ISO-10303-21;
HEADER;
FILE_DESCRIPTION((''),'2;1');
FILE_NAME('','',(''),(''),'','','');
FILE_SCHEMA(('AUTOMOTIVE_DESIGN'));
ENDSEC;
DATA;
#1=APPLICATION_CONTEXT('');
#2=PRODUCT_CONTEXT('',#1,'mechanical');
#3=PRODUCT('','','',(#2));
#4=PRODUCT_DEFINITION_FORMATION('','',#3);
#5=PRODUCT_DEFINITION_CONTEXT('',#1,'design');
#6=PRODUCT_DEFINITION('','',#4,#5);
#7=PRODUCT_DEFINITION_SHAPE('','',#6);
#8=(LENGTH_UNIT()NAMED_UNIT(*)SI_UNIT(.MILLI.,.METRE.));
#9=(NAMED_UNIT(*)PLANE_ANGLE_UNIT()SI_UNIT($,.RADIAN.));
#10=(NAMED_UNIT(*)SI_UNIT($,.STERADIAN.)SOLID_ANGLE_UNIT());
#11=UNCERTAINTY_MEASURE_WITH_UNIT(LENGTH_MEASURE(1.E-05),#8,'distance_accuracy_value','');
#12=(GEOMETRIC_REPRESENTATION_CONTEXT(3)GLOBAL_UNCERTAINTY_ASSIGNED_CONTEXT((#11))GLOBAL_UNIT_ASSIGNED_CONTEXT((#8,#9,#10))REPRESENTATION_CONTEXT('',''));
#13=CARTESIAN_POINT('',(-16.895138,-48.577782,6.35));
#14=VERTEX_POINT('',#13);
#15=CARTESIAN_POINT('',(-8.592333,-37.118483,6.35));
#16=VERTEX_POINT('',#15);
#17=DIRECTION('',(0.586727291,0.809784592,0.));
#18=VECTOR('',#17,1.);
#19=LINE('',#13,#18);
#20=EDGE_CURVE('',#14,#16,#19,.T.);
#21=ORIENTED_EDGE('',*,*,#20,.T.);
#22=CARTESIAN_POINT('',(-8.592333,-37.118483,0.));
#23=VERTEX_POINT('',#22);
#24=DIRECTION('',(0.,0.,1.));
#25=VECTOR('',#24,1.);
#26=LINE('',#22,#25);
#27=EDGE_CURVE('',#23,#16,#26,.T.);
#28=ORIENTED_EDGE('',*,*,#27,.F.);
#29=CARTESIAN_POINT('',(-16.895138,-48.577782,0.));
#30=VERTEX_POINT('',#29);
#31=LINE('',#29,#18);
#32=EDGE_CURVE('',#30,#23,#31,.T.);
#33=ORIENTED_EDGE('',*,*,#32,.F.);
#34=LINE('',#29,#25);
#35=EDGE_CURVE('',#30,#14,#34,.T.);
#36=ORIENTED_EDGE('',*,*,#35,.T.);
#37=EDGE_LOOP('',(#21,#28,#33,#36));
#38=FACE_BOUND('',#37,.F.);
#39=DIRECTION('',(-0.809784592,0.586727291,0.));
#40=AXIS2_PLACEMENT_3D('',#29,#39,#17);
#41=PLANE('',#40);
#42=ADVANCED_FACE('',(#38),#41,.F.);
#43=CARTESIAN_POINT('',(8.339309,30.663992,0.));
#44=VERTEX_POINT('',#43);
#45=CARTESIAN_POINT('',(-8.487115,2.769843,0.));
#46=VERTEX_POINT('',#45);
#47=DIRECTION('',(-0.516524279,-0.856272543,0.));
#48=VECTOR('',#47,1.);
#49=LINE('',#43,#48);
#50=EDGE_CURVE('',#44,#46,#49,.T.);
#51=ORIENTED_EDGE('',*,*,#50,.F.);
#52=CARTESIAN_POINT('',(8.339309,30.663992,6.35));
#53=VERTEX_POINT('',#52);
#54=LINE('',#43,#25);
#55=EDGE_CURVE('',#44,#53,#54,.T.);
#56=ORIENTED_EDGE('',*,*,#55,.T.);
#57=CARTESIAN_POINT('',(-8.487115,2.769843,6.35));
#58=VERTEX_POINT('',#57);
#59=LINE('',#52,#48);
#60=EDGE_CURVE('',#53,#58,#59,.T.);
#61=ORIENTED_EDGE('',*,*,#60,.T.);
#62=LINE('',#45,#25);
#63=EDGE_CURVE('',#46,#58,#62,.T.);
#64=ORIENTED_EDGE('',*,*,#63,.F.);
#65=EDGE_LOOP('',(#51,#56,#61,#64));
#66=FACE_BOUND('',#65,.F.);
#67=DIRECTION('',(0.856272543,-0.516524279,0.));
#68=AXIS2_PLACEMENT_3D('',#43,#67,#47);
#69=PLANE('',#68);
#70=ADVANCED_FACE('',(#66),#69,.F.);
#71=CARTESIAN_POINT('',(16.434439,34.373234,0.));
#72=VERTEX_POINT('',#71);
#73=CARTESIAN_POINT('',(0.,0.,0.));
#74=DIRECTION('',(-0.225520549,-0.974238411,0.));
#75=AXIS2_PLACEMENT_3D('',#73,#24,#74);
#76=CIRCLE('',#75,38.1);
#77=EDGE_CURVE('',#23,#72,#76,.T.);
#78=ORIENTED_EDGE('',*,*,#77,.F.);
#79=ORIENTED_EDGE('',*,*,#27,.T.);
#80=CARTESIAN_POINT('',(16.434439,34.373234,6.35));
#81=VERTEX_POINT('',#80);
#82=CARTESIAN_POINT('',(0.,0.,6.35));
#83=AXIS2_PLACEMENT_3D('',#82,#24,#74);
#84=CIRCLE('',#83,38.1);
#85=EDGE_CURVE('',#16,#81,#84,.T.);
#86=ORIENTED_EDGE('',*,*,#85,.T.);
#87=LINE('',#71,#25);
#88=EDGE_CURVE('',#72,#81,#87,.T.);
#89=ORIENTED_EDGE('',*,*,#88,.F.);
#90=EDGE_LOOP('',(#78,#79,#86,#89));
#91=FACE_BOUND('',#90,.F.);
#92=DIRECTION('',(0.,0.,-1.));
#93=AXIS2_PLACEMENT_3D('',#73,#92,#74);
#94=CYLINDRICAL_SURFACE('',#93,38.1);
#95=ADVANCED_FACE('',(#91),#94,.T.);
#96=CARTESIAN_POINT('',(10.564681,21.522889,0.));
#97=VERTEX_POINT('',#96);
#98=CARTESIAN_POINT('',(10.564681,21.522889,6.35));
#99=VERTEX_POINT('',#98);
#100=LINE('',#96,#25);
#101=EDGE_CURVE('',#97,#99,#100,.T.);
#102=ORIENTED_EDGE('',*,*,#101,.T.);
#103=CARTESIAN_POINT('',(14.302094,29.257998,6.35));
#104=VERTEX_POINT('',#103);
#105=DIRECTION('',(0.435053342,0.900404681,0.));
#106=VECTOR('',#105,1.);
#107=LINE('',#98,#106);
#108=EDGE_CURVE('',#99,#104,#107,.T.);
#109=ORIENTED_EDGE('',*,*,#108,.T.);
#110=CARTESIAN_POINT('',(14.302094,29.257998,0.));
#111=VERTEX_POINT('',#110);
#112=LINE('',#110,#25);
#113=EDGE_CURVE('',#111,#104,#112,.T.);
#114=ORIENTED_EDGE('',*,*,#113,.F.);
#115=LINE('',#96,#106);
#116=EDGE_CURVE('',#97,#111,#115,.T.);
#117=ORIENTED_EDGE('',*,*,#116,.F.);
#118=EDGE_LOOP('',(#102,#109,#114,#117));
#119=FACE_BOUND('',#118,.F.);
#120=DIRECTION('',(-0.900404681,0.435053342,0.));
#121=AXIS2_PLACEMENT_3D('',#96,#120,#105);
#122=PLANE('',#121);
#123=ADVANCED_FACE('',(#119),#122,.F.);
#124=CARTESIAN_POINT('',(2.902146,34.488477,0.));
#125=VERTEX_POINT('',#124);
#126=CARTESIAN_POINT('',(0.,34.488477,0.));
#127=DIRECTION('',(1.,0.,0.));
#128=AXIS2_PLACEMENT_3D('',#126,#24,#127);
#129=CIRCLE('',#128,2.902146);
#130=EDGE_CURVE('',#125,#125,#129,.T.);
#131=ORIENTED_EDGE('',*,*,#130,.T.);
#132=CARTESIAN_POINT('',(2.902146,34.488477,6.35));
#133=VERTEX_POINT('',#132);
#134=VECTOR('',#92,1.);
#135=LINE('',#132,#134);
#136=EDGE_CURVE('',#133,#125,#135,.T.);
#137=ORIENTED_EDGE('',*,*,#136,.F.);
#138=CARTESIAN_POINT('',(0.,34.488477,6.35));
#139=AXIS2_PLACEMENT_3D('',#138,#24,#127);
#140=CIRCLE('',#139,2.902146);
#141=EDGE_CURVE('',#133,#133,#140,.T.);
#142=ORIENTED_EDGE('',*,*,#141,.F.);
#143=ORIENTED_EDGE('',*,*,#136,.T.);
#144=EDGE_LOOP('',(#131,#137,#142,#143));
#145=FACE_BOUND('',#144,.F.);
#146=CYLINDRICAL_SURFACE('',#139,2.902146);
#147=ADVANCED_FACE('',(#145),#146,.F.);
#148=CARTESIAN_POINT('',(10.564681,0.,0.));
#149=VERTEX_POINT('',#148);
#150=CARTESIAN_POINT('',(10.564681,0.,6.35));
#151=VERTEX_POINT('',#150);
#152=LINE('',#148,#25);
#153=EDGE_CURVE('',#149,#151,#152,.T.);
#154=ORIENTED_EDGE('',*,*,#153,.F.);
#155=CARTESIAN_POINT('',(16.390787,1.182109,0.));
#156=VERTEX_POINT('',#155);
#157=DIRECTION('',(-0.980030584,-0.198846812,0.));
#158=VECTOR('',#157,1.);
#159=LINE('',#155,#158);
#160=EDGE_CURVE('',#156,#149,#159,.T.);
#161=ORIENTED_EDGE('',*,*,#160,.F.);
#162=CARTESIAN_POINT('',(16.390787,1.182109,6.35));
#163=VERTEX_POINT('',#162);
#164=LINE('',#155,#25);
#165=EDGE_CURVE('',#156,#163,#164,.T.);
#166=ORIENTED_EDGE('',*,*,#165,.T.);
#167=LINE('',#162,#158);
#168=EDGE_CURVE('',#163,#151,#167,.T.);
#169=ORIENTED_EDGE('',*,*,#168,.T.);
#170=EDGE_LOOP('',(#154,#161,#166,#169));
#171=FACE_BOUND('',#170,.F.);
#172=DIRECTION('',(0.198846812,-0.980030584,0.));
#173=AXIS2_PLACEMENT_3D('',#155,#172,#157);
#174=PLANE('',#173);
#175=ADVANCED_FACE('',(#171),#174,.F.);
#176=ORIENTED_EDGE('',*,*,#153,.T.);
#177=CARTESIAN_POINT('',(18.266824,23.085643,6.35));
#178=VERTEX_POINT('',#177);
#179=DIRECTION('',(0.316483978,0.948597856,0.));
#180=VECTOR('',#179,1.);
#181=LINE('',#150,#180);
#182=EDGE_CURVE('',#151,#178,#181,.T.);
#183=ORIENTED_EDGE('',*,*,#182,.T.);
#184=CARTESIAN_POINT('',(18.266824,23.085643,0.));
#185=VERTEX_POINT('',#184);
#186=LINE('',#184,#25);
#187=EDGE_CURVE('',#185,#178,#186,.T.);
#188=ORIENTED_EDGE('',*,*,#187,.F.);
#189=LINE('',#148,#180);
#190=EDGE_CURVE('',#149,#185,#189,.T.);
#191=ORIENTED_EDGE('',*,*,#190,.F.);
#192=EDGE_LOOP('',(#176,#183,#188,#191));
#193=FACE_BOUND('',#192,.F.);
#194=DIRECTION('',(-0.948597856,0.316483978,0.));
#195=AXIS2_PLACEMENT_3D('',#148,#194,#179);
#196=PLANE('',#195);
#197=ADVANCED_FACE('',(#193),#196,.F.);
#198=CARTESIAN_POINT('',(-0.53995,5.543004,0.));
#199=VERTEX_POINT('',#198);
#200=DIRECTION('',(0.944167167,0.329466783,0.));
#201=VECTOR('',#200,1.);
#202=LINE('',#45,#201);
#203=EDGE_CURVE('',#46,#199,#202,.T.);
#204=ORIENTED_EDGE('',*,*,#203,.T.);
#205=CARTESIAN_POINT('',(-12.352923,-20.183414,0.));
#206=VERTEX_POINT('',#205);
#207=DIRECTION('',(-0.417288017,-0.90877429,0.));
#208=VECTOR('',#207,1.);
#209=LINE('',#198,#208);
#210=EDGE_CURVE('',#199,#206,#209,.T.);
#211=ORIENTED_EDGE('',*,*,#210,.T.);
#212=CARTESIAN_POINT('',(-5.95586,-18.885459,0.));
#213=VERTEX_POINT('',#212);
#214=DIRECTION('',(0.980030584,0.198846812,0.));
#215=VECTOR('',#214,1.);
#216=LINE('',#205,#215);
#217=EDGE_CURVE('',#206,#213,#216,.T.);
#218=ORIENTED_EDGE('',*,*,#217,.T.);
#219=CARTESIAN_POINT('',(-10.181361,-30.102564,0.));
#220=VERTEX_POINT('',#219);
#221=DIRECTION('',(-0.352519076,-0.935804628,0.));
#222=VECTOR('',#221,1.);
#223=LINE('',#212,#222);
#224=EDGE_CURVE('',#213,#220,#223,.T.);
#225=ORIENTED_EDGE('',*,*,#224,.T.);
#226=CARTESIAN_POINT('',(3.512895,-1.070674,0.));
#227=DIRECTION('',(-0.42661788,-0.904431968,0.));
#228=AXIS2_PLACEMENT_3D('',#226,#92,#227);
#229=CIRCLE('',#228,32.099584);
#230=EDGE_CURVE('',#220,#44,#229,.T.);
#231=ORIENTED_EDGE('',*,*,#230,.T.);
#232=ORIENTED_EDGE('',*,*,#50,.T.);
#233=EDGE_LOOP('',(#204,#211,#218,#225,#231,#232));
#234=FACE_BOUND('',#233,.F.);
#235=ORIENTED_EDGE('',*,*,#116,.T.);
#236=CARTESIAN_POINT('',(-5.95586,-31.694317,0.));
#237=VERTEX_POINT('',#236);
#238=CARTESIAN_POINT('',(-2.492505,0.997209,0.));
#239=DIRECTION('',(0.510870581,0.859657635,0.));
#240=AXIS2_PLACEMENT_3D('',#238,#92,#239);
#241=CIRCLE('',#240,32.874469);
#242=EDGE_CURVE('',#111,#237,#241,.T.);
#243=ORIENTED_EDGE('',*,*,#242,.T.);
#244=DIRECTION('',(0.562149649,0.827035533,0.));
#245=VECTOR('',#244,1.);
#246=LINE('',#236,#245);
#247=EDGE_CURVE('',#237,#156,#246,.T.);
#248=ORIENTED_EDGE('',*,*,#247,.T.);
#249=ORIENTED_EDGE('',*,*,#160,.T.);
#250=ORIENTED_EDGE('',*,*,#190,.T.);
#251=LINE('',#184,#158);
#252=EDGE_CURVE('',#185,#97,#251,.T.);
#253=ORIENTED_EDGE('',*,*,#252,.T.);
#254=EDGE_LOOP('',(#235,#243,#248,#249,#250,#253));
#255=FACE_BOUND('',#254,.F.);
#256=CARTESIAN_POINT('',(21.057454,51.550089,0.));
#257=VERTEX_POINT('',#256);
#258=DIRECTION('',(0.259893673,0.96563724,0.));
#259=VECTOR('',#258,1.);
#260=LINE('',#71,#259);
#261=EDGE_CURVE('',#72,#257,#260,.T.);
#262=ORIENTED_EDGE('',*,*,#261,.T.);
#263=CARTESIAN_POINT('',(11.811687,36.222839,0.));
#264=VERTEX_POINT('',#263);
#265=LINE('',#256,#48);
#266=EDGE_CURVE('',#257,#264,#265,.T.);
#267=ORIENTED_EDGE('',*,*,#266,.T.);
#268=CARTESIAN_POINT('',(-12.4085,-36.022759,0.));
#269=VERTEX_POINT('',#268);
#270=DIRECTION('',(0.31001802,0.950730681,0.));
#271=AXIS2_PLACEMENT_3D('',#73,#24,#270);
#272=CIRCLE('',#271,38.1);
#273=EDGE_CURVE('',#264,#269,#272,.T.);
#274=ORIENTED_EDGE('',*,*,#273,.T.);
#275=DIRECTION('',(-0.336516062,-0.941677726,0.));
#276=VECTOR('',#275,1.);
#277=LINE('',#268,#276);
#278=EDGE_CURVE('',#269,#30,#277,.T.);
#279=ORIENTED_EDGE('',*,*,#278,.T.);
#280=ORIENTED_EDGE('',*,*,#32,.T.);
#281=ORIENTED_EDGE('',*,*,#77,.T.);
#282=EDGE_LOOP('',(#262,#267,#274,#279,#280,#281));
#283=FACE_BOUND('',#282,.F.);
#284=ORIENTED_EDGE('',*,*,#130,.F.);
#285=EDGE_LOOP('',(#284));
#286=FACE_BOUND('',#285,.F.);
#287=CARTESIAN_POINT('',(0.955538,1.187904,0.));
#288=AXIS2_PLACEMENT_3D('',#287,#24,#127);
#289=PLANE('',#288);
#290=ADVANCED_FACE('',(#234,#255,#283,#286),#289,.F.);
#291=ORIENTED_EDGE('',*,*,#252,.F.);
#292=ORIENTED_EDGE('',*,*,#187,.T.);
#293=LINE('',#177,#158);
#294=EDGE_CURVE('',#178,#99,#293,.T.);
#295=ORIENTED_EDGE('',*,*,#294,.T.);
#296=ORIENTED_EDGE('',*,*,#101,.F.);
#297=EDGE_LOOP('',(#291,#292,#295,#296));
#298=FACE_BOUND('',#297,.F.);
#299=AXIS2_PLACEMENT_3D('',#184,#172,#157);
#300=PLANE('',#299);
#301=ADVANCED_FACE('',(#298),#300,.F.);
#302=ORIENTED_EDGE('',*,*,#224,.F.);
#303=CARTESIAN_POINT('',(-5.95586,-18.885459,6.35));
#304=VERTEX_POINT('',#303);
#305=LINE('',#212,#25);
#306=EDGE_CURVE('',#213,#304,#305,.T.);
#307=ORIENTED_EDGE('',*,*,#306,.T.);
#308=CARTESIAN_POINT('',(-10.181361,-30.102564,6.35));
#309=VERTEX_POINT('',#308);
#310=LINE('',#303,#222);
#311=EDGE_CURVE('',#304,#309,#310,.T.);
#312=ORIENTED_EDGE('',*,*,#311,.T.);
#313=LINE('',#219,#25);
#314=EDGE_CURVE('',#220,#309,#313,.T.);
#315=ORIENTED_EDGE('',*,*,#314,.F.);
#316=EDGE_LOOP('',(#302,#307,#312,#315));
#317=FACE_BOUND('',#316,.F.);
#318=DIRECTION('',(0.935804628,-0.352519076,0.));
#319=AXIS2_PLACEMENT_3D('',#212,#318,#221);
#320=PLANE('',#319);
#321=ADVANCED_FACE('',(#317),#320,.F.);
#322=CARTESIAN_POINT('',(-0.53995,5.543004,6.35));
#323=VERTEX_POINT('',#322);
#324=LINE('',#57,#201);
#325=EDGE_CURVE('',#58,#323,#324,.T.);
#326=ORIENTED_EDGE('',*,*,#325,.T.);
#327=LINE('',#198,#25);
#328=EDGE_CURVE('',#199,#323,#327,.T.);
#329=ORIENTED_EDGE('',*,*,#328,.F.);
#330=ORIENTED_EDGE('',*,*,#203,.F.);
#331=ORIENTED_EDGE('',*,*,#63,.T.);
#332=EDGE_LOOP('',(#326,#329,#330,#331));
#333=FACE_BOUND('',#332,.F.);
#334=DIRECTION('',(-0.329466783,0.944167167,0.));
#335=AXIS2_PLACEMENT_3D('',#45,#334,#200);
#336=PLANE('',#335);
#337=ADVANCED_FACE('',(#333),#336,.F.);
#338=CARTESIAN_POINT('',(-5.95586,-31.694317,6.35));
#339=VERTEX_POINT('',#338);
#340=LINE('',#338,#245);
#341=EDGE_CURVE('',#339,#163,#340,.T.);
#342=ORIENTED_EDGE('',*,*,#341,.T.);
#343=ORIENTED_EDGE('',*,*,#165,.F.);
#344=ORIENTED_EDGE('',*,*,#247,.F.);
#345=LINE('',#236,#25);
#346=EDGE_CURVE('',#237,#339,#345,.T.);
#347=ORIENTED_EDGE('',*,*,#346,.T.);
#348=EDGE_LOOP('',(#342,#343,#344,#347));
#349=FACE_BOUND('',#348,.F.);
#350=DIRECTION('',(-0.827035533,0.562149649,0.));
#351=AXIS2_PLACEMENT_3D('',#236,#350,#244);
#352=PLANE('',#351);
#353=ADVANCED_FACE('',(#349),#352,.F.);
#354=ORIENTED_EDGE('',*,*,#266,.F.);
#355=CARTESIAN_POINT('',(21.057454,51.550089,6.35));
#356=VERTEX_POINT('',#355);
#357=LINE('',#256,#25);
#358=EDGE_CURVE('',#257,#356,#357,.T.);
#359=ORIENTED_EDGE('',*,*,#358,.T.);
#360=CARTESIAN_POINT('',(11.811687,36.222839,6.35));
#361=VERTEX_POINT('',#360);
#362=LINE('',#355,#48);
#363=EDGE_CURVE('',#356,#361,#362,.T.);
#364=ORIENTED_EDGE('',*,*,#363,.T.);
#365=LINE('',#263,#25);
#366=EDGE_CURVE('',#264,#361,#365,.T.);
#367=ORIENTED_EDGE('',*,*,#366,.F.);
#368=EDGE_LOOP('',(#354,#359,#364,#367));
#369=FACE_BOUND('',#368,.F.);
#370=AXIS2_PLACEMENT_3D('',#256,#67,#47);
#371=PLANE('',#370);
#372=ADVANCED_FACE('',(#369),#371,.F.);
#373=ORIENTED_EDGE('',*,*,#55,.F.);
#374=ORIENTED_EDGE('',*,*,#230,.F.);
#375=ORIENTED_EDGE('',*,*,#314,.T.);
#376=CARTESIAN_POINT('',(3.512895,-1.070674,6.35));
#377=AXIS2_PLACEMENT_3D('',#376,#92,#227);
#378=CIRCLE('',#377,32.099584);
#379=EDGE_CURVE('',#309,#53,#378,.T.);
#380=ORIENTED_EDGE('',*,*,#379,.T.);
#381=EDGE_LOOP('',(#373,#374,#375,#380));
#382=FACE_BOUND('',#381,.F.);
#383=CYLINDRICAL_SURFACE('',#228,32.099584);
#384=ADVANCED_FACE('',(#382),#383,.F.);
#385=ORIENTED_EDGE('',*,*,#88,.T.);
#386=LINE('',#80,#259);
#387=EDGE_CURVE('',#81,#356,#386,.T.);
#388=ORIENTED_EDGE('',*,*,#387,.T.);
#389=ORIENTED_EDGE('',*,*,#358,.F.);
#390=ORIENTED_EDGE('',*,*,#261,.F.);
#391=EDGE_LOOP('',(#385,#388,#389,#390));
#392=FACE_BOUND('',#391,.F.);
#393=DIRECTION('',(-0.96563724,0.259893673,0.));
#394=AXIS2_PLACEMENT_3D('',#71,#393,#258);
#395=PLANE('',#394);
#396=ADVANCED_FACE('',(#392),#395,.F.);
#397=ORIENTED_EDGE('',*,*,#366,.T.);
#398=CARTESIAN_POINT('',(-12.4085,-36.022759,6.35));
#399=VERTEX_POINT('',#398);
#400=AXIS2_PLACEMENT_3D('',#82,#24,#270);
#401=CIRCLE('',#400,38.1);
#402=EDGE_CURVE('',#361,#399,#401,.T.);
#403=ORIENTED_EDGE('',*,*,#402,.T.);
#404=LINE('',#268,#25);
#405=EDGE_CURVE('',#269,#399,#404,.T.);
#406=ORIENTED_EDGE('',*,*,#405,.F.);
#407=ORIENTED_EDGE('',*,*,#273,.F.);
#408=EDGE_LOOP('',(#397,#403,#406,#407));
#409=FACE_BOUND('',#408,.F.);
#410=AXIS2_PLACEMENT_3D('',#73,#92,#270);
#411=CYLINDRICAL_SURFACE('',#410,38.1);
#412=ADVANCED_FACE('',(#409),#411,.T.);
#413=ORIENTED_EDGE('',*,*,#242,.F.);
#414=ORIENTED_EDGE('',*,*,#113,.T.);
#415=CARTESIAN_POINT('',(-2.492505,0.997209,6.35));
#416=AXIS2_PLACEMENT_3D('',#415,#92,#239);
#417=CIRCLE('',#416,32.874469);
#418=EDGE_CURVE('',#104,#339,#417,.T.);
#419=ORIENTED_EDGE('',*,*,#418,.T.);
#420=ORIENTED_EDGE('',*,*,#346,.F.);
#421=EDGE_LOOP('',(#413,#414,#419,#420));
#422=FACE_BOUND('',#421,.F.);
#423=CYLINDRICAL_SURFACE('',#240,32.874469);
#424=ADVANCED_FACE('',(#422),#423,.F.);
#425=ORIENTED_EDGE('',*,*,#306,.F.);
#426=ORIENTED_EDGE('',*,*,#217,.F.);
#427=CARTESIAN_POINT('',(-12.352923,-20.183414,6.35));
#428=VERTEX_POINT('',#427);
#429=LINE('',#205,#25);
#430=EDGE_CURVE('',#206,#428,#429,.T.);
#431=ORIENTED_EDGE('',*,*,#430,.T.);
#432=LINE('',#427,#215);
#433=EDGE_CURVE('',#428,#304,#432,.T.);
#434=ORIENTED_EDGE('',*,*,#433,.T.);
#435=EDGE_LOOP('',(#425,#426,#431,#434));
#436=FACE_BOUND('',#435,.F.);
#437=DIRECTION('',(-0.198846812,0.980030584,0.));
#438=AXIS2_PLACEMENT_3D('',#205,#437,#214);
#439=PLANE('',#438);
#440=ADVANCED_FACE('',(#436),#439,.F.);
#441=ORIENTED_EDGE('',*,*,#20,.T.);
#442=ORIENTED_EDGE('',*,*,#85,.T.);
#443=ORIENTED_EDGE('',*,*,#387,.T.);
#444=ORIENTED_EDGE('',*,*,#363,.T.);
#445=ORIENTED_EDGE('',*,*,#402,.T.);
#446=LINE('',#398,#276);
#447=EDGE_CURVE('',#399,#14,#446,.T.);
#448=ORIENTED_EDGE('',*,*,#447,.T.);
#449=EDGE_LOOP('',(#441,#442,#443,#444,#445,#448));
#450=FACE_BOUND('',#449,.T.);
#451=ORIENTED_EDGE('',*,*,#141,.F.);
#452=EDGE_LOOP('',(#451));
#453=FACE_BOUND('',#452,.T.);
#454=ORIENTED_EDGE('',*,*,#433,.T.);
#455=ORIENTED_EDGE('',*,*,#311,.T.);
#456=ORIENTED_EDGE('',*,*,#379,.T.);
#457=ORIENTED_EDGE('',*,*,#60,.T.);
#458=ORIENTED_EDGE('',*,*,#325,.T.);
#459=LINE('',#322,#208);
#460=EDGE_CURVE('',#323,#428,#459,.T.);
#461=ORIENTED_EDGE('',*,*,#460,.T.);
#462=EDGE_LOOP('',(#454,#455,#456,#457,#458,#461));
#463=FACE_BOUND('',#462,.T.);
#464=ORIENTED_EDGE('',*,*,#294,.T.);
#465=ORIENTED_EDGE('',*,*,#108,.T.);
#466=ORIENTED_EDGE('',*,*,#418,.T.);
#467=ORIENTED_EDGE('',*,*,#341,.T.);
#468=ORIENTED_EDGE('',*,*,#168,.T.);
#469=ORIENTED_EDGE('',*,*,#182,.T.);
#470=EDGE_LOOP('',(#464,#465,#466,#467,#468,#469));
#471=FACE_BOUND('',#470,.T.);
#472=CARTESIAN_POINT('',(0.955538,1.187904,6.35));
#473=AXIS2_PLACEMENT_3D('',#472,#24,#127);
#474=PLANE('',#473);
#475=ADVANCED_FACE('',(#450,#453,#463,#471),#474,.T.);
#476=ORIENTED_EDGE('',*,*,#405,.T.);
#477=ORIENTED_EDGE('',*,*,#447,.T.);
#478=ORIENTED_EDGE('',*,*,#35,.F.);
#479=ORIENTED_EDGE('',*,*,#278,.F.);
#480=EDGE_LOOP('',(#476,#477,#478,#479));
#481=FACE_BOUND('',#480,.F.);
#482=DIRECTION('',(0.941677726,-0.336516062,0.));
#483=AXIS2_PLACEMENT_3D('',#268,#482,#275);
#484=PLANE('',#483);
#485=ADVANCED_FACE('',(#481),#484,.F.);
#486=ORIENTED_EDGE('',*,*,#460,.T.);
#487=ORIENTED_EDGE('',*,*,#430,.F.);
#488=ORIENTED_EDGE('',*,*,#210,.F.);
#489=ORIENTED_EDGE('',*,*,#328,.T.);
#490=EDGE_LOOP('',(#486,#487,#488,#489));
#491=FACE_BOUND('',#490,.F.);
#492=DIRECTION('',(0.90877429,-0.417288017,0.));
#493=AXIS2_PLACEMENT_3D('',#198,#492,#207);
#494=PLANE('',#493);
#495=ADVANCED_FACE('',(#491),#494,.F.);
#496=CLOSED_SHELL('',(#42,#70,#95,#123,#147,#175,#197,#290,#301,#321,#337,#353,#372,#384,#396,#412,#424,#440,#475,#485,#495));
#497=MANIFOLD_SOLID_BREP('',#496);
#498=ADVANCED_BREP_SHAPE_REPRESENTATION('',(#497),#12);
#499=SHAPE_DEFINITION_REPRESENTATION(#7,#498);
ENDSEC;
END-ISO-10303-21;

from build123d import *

# Parameters (mm, degrees)
F1_DEPTH = 6.35
F2_R     = 2.9021462782
F3_DEPTH = 12.7


# Not quite as in the source:
# - a feature names something its author has since deleted; it is built from what else it names


with BuildPart() as f1:
    # F0 (on Top) → F1 (new body)
    with BuildSketch(Plane.XY):
        with BuildLine():
            Line((16.4344385917, 34.3732341826), (21.0574541174, 51.5500892249))
            Line((21.0574541174, 51.5500892249), (11.8116865515, 36.2228389391))
            ThreePointArc((11.8116865515, 36.2228389391), (-36.1240313077, 12.1105062684), (-12.4084995786, -36.0227586146))
            Line((-12.4084995786, -36.0227586146), (-16.8951376196, -48.5777822575))
            Line((-16.8951376196, -48.5777822575), (-8.5923329011, -37.1184834727))
            ThreePointArc((-8.5923329011, -37.1184834727), (35.960270838, -12.5884439569), (16.4344385917, 34.3732341826))
        make_face()
        with BuildLine():
            Line((-5.9558603501, -18.8854594723), (-10.1813612864, -30.1025640222))
            ThreePointArc((-10.1813612864, -30.1025640222), (-27.192206018, 8.287747581), (8.3393088452, 30.6639920157))
            Line((8.3393088452, 30.6639920157), (-8.4871153459, 2.7698433524))
            Line((-8.4871153459, 2.7698433524), (-0.5399501962, 5.5430036832))
            Line((-0.5399501962, 5.5430036832), (-12.3529230131, -20.1834143903))
            Line((-12.3529230131, -20.1834143903), (-5.9558603501, -18.8854594723))
        make_face(mode=Mode.SUBTRACT)
        with BuildLine():
            Line((10.5646807305, 0), (18.2668235735, 23.0856431528))
            Line((18.2668235735, 23.0856431528), (10.5646807305, 21.522889322))
            Line((10.5646807305, 21.522889322), (14.302094467, 29.2579978704))
            ThreePointArc((14.302094467, 29.2579978704), (28.7040765344, -9.3712062036), (-5.9558603501, -31.6943168745))
            Line((-5.9558603501, -31.6943168745), (16.3907865629, 1.182108589))
            Line((16.3907865629, 1.182108589), (10.5646807305, 0))
        make_face(mode=Mode.SUBTRACT)
    extrude(amount=F1_DEPTH)

    # F2 (on face) → F3 (cut)
    with BuildSketch(Plane.XY.offset(6.35)):
        with Locations((0, 34.4884768128)):
            Circle(F2_R)
    extrude(amount=-F3_DEPTH, mode=Mode.SUBTRACT)


solid = f1.part
